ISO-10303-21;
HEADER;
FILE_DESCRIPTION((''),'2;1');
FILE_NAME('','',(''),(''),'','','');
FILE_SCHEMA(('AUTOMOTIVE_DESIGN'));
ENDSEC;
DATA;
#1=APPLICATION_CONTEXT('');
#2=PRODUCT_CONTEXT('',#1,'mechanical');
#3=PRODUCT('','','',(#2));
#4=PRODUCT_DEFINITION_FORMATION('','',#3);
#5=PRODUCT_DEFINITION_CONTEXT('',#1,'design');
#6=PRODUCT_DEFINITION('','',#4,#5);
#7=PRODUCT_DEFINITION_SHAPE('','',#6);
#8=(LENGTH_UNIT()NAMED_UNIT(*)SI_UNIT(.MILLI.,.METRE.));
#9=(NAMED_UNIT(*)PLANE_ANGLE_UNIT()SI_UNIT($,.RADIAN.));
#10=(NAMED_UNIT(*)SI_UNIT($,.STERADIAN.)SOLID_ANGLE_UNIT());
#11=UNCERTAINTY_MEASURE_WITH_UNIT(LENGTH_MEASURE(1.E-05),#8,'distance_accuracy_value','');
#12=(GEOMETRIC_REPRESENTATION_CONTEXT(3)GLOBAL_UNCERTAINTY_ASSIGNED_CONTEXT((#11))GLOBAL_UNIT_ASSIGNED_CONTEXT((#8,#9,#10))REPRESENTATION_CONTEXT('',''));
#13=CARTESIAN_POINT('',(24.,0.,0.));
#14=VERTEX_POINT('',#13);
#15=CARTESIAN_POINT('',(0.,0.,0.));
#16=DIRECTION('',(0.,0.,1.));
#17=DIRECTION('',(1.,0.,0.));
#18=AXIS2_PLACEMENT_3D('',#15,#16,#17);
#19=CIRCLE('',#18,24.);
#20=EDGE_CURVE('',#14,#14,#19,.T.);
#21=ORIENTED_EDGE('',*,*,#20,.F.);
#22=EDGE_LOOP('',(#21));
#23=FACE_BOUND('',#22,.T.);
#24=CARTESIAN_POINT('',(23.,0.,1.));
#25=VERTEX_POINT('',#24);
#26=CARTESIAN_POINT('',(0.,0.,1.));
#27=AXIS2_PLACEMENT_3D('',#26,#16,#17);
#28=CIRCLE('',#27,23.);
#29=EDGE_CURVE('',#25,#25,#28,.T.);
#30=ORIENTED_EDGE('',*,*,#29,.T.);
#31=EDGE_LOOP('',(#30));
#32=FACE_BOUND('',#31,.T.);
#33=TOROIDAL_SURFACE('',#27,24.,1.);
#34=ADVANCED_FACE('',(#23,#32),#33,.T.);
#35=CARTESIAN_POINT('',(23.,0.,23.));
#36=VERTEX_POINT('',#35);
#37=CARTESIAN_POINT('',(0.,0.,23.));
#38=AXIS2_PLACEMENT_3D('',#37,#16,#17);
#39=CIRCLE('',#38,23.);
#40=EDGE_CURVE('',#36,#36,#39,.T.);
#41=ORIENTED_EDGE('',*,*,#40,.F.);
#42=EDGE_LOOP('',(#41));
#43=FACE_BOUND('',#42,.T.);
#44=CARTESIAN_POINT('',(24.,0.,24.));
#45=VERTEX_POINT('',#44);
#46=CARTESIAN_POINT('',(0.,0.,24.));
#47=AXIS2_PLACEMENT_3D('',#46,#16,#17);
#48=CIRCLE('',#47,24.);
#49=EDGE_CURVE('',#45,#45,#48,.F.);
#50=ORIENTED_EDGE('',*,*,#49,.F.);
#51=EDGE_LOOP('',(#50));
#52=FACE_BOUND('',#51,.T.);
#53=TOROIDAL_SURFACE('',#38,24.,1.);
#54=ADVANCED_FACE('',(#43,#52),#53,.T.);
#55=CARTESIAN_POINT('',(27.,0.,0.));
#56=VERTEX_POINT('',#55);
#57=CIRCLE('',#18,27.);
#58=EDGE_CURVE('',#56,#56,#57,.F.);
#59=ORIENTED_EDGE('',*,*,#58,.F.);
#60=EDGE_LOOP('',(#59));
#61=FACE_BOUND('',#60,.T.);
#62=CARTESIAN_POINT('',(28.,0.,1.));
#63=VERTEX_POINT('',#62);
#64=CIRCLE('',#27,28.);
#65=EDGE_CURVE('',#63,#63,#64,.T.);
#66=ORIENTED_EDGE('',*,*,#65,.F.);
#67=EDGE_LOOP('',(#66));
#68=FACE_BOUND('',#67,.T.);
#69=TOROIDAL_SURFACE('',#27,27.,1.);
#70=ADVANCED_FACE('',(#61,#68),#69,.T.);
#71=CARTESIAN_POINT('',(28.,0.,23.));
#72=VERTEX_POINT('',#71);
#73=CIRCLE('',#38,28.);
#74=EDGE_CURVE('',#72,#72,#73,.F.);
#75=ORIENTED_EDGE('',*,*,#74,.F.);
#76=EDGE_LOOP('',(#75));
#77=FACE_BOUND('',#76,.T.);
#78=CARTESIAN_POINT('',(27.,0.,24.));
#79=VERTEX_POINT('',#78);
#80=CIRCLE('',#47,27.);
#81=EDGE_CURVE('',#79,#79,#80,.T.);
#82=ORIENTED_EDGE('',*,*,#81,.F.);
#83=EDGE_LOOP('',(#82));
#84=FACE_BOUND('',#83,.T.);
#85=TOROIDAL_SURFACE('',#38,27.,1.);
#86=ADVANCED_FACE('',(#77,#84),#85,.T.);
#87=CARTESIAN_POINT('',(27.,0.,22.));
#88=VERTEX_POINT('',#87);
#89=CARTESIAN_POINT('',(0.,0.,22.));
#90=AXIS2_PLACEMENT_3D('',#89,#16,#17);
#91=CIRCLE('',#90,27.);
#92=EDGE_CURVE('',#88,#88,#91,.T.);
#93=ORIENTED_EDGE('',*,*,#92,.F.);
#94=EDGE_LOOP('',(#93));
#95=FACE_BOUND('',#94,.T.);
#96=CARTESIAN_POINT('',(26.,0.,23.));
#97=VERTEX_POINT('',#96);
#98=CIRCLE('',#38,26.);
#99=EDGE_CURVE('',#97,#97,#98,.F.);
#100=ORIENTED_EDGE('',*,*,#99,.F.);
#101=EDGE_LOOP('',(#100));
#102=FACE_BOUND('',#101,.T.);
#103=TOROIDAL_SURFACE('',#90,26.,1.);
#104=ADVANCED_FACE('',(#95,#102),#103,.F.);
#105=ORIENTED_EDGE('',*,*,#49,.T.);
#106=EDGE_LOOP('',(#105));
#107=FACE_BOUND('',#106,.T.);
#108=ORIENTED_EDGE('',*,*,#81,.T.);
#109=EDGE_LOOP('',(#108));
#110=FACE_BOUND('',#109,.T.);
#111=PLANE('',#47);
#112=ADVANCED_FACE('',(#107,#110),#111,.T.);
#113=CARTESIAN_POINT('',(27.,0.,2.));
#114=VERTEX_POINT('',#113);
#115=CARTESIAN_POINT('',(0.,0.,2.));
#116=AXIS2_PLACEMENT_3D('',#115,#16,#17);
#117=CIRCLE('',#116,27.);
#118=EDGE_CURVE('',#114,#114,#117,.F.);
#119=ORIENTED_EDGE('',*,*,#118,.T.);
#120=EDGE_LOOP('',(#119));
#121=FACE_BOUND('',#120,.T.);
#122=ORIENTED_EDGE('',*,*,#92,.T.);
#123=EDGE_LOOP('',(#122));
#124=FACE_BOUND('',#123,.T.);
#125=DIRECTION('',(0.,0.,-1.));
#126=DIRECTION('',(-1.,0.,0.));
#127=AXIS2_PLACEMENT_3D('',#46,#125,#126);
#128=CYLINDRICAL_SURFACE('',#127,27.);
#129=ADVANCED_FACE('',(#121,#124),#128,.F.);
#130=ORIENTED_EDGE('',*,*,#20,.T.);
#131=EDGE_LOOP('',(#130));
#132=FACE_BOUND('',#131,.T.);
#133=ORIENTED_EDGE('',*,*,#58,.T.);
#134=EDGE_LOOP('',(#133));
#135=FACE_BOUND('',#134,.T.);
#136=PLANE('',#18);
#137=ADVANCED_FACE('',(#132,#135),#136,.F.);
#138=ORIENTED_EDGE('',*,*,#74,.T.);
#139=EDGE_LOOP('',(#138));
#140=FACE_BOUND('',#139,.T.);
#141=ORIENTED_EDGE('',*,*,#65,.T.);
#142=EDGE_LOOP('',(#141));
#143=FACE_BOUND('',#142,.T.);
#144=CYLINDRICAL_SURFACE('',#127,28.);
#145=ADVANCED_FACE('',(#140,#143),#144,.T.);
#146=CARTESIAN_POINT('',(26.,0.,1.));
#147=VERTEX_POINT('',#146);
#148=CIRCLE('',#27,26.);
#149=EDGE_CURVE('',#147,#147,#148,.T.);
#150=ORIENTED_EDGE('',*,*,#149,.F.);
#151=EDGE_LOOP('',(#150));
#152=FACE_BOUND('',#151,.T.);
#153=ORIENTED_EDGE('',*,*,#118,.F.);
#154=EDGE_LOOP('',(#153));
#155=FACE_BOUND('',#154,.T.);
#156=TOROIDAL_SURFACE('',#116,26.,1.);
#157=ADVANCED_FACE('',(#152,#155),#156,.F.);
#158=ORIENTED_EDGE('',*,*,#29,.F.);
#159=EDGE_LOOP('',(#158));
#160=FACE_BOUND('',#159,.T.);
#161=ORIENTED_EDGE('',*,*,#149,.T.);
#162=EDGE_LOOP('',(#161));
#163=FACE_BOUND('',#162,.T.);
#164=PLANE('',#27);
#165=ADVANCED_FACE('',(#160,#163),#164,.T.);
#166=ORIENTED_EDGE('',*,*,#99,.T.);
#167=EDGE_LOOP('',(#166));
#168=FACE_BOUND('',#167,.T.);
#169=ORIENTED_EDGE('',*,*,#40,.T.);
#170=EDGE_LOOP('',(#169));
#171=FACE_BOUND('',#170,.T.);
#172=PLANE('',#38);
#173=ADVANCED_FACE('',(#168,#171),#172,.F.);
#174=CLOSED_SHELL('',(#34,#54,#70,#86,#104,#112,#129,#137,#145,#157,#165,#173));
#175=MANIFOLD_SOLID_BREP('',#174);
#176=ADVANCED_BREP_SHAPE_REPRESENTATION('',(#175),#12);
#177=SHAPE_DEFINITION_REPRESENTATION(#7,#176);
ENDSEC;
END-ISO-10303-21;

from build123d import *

# Parameters (mm, degrees)
SKETCH1_R           = 28
SKETCH1_R_2         = 23
BOSS_EXTRUDE1_DEPTH = 24
FILLET1_R           = 1
SHELL1_START        = 1
SHELL1_OUTLINE_R    = 27
SHELL1_OUTLINE_R_2  = 23
SHELL1_DEPTH        = 22
FILLET2_R           = 1


# Read off the part's stored shape, not the designer's step: Shell1
with BuildPart() as part:
    # Sketch1 → Boss-Extrude1 (new body)
    with BuildSketch(Plane.XY):
        Circle(SKETCH1_R)
        Circle(SKETCH1_R_2, mode=Mode.SUBTRACT)
    extrude(amount=BOSS_EXTRUDE1_DEPTH)

    # Fillet1
    fillet1_edges = [part.edges().sort_by_distance(p)[0] for p in [
        (-28, 0, 0),
        (-28, 0, 24),
        (-23, 0, 0),
        (-23, 0, 24),
    ]]
    fillet(fillet1_edges, radius=FILLET1_R)

    # Shell1 outline → Shell1 (cut)
    with BuildSketch(Plane.XY.offset(SHELL1_START)):
        Circle(SHELL1_OUTLINE_R)
        Circle(SHELL1_OUTLINE_R_2, mode=Mode.SUBTRACT)
    extrude(amount=SHELL1_DEPTH, mode=Mode.SUBTRACT)

    # Fillet2
    fillet2_edges = [part.edges().sort_by_distance(p)[0] for p in [
        (-27, 0, 23),
        (-27, 0, 1),
    ]]
    fillet(fillet2_edges, radius=FILLET2_R)


solid = part.part
